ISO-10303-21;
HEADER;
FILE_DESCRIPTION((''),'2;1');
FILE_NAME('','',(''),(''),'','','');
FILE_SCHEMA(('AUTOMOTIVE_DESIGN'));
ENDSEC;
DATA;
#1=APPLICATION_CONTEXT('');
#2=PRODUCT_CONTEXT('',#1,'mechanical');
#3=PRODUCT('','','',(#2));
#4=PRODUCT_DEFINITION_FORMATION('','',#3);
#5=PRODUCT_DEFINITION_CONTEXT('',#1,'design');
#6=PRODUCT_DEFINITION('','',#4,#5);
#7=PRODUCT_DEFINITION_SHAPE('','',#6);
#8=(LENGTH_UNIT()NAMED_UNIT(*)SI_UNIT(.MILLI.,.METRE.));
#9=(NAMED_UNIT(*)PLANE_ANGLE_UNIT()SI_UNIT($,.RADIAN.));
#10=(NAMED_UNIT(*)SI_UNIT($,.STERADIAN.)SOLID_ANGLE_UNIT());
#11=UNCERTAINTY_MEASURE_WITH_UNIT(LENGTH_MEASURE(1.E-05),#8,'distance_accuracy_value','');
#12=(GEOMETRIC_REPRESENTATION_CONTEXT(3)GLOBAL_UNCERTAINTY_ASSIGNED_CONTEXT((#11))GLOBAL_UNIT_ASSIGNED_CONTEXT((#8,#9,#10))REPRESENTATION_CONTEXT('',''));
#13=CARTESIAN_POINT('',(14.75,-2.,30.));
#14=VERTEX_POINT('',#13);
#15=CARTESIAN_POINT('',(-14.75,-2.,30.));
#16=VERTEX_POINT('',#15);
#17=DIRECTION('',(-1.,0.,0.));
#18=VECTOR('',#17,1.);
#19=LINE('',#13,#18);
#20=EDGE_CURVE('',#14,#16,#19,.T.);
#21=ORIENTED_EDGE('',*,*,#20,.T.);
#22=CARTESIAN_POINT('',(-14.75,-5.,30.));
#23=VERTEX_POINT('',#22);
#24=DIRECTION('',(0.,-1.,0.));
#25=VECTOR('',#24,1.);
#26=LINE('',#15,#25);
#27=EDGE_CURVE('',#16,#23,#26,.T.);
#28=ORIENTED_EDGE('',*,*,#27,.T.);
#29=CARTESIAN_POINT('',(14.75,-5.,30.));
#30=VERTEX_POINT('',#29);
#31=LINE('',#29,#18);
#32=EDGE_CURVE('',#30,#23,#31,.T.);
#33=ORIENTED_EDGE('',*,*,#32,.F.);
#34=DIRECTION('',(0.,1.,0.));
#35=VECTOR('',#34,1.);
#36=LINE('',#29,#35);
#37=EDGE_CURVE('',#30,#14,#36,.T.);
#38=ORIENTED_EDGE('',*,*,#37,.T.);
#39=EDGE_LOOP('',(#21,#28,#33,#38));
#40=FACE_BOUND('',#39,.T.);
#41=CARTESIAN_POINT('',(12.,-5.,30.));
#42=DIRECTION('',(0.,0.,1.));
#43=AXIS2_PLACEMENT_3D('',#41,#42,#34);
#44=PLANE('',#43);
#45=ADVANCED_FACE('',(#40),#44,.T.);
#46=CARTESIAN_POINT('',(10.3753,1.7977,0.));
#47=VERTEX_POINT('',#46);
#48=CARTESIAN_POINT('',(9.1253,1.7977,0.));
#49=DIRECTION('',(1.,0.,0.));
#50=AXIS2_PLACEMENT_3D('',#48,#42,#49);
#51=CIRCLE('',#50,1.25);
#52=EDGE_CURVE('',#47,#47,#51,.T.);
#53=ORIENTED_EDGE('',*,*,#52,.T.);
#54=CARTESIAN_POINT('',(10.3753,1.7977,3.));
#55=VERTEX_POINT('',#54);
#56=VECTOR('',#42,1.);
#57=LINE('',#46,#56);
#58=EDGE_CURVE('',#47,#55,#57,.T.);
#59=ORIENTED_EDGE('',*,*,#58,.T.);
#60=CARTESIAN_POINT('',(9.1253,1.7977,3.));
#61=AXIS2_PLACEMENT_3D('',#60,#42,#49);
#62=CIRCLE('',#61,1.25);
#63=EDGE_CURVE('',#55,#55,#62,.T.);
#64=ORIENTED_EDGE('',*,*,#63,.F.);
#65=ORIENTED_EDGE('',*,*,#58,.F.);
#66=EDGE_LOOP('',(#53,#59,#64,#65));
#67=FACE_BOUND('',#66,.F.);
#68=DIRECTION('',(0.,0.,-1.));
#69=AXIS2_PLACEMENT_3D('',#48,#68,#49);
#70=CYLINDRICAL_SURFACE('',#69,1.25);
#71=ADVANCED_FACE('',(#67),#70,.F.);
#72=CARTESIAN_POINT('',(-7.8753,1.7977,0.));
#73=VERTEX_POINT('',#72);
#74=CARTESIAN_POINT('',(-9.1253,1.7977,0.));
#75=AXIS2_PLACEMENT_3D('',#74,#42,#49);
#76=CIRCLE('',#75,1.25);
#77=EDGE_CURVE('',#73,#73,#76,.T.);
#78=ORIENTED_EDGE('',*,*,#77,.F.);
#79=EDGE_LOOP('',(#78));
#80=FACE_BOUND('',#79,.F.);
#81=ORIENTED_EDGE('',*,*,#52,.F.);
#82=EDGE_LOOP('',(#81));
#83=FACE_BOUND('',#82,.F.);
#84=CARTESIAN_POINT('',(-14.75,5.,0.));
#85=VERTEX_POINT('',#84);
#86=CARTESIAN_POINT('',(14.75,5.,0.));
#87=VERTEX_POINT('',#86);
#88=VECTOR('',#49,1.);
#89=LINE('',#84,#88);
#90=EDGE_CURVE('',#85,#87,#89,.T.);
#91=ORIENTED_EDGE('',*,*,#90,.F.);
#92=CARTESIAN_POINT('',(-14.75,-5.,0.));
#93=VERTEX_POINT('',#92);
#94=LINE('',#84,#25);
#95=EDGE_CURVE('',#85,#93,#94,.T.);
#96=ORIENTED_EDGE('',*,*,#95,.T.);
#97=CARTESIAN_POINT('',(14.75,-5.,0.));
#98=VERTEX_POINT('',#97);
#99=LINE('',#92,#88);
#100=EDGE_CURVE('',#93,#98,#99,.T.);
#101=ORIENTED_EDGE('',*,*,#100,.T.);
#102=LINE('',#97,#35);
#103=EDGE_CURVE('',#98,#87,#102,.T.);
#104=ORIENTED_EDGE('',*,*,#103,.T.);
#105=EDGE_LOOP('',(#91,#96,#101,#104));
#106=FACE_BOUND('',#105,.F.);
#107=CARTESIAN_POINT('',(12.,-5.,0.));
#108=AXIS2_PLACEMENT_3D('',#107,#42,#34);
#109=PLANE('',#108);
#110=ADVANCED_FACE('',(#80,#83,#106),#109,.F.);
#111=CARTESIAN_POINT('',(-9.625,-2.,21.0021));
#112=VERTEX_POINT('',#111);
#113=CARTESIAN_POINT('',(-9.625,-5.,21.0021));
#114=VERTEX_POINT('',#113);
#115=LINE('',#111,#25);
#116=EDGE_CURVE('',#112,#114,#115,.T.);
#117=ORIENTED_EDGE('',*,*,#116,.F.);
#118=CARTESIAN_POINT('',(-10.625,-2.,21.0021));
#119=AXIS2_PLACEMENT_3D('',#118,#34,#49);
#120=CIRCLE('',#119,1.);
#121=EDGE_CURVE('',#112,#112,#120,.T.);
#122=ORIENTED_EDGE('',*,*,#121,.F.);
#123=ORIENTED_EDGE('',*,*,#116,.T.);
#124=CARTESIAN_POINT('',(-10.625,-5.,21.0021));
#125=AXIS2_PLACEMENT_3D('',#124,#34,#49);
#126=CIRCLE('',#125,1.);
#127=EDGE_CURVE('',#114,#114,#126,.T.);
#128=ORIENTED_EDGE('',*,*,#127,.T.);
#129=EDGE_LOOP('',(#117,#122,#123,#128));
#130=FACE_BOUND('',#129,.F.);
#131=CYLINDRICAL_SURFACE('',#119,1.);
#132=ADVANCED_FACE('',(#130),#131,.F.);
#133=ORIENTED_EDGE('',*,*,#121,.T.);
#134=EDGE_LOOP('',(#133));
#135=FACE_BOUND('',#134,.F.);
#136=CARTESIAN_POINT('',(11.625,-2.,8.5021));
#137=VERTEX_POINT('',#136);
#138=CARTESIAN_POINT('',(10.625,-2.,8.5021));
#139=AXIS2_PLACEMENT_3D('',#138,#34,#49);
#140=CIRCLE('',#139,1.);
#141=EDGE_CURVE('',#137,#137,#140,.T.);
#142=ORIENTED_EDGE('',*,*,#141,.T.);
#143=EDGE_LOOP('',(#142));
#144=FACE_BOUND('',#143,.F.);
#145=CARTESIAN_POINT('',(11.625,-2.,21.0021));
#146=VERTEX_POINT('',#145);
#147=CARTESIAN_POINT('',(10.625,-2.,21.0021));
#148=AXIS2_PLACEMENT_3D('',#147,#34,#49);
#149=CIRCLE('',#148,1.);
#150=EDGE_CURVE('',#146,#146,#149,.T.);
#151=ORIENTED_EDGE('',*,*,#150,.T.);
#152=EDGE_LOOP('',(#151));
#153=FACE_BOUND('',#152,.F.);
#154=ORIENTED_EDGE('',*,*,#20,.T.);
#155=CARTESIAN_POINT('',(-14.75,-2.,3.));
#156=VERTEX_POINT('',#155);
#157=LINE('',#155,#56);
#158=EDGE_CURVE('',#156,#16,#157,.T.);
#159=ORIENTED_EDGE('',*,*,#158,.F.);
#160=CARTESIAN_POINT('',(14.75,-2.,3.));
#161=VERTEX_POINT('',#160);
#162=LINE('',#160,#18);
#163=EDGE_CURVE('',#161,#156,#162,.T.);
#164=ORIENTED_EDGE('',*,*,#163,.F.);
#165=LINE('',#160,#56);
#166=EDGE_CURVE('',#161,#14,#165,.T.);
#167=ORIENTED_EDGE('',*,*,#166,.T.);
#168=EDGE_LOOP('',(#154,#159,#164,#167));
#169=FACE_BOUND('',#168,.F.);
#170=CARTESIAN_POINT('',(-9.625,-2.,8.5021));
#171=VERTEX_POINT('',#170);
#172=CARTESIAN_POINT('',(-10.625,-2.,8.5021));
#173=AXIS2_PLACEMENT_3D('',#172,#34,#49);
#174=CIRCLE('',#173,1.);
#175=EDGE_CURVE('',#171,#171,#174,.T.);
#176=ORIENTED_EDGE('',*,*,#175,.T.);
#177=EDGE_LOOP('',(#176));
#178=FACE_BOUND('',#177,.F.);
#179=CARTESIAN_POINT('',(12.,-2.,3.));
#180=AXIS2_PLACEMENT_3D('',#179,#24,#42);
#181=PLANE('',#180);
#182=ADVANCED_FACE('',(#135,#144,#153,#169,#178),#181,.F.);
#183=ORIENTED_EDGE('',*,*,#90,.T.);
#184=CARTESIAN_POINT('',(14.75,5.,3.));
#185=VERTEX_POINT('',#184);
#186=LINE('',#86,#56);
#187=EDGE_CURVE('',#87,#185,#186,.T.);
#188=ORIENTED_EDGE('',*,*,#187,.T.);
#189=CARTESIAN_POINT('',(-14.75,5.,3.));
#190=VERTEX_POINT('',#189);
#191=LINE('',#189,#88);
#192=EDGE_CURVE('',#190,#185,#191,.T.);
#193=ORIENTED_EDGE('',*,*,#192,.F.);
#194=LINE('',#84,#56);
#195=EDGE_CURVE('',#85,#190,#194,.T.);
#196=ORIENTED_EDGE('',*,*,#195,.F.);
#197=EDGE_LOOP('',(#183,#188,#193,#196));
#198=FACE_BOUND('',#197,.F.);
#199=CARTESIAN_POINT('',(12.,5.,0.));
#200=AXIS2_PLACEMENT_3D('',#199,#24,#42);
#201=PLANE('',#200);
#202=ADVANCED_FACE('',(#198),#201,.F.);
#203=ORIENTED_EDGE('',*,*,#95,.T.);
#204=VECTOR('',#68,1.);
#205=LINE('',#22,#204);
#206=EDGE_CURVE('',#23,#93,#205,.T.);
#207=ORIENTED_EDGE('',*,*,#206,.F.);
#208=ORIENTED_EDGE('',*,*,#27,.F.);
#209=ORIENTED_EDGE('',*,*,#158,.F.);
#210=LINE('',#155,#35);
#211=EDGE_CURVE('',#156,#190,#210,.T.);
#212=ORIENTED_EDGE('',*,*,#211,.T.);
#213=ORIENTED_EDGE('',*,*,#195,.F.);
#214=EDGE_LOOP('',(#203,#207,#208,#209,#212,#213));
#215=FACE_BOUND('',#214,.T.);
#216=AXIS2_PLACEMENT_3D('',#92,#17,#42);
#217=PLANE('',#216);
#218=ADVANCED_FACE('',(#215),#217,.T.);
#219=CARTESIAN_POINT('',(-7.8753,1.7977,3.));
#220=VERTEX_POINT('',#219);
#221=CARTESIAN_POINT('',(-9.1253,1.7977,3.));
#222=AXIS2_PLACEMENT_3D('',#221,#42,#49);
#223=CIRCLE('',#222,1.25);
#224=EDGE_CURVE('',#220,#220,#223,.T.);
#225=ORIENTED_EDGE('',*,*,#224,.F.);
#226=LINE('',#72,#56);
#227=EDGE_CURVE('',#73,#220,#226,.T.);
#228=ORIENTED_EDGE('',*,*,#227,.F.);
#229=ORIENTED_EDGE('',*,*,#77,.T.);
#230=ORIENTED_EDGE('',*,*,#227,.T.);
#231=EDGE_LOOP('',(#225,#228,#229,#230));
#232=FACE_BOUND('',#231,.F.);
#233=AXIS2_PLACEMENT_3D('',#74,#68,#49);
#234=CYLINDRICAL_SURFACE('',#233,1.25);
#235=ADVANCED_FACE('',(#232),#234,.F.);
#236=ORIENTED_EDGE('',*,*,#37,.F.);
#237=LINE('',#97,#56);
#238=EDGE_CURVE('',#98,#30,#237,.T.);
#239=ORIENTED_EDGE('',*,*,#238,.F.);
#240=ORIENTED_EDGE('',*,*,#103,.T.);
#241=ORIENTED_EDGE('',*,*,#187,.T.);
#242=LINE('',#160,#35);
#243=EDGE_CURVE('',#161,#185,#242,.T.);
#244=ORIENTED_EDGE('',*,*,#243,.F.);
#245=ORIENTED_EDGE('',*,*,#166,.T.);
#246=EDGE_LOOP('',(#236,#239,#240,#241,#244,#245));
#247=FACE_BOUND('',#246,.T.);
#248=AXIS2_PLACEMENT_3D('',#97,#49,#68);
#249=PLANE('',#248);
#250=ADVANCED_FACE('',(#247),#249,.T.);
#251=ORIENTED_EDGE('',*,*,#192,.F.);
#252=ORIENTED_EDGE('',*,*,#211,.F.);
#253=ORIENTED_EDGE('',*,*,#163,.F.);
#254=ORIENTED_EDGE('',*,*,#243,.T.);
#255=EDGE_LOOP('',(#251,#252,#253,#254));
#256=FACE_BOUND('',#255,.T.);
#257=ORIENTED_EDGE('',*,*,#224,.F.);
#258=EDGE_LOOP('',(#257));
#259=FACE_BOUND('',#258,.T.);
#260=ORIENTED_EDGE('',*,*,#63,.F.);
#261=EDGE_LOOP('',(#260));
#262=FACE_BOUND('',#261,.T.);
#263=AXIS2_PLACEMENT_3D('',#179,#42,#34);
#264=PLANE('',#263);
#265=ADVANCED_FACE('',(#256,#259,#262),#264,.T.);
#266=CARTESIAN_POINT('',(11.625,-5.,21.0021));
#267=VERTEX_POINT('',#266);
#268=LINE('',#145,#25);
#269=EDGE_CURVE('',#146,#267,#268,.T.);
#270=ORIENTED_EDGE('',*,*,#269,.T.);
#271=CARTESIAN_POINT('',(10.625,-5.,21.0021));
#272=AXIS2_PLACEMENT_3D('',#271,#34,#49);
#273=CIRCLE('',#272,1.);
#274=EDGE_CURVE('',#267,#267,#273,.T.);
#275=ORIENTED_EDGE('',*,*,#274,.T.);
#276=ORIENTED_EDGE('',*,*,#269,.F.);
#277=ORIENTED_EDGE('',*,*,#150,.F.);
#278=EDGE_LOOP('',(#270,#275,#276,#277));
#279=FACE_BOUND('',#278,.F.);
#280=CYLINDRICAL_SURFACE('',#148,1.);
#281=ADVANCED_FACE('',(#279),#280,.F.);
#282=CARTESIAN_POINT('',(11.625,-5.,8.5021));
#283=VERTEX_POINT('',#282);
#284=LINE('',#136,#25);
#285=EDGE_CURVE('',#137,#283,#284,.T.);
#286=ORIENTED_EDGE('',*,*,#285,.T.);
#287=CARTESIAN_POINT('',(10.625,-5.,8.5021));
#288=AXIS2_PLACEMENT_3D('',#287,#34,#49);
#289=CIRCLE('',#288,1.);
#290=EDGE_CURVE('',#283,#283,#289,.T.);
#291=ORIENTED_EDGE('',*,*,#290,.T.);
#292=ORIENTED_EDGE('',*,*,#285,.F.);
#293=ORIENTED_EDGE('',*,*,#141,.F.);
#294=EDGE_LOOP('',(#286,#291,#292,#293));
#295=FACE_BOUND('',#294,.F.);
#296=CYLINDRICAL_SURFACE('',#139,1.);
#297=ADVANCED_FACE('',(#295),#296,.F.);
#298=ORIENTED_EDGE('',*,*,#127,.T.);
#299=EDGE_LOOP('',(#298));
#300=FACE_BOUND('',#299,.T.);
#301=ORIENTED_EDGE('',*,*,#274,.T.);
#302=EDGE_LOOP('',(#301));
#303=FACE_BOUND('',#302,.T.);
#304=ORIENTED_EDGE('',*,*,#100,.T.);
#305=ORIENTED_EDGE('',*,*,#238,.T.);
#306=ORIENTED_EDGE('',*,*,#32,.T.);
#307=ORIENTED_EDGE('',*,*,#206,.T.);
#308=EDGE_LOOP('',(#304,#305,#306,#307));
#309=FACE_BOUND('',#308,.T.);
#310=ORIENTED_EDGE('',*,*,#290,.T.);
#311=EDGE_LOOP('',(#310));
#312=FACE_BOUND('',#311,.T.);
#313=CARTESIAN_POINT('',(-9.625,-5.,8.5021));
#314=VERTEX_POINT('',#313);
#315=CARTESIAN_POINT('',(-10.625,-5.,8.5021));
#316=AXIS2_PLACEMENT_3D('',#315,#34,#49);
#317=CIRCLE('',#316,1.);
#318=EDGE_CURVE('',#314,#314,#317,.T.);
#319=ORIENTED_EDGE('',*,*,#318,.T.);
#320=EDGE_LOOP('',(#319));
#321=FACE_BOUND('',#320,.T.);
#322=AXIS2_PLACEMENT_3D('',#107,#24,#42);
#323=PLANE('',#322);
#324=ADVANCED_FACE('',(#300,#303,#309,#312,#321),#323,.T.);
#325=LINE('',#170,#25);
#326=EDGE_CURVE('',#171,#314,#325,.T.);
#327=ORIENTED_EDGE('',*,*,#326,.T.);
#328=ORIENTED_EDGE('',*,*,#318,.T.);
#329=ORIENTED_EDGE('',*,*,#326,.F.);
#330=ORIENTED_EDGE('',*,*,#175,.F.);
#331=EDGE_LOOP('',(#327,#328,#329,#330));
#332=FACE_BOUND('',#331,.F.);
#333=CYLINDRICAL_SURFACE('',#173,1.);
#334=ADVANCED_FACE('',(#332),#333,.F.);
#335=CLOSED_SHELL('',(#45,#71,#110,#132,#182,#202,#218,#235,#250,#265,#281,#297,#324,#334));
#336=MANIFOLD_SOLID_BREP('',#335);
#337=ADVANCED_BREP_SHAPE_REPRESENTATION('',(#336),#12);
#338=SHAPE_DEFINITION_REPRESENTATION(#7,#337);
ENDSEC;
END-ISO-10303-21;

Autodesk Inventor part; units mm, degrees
ref_plane "YZ Plane" through (0, 0, 0) normal (1, 0, 0) x (0, 1, 0)
ref_plane "XZ Plane" through (0, 0, 0) normal (0, 1, 0) x (-1, 0, 0)
ref_plane "XY Plane" through (0, 0, 0) normal (0, 0, 1) x (1, 0, 0)
sketch "Sketch1" plane through (0, 0, 0) normal (0, 0, 1) x (1, 0, 0)
  line L0 (-12, -5) -> (12, -5)
  line L1 (12, -5) -> (12, 5)
  line L2 (12, 5) -> (-12, 5)
  line L3 (-12, 5) -> (-12, -5)
  line L4 (-12, -5) -> (12, 5) construction
  line L5 (12, -5) -> (-12, 5) construction
  line L6 (-12, 5) -> (-10, 5)
  line L7 (-12, 3) -> (-12, 5)
  line L8 (12, 5) -> (10, 5)
  line L9 (12, 3) -> (12, 5)
  circle A0 centre (-9.1253, 1.7977) radius 1.25
  circle A1 centre (9.1253, 1.7977) radius 1.25
  point P0 (0, 0)
  point P1 (-12, 0)
  point P2 (12, 0)
  point P3 (10.3753, 1.7977)
  point P4 (10.375, 1.7725)
  point P5 (9.4672, 3)
  point P6 (-9.4672, 3)
  point P7 (10.375, 1.7725)
  point P8 (-10.375, 1.7725)
  dimension "d0" = 24
  dimension "d1" = 10
  dimension "d14" = 2.5
  dimension "d15" = 2.5
  dimension "d55" = 8
  dimension "d58" = 8
  dimension "d60" = 1.625
  dimension "d61" = 1.625
  dimension "d62" = 18.2505
extrude "Extrusion4" add sketch "Sketch1" along normal blind 3
sketch "Sketch3" plane through (0, 0, 3) normal (0, 0, 1) x (1, 0, 0)
  line L0 (12, -5) -> (12, 5) projected
  line L1 (12, -5) -> (-12, -5)
  line L2 (-12, -5) -> (-12, -2)
  line L3 (-12, -2) -> (12, -2)
  line L4 (12, -2) -> (12, -5)
  point P0 (0, 0)
  point P1 (-12, -5)
  point P2 (12, 3)
  dimension "d24" = 3
extrude "Extrusion5" add sketch "Sketch3" along normal blind 27
sketch "Sketch4" plane through (-12, -2, 3) normal (0, 1, 0) x (1, 0, 0)
  circle A0 centre (22.625, -18.0021) radius 1
  circle A1 centre (1.375, -18.0021) radius 1
  circle A2 centre (22.625, -5.5021) radius 1
  circle A3 centre (1.375, -5.5021) radius 1
  line L0 (24, -0.0021) -> (0, -0.0021)
  line L1 (24, 0) -> (24, -27) projected
  line L2 (0, 3) -> (0, -27) projected
  point P0 (12, 3)
  dimension "d68" = 1.375
  dimension "d69" = 1.375
  dimension "d70" = 1.375
  dimension "d71" = 1.375
extrude "Extrusion7" cut sketch "Sketch4" against normal blind 3
sketch "Sketch5" plane through (0, 0, 0) normal (0, 0, -1) x (-1, 0, 0)
  circle A0 centre (-9.1253, 1.7977) radius 1.25 projected
  circle A1 centre (9.1253, 1.7977) radius 1.25 projected
  point P0 (0, 0)
sketch "Sketch6" plane through (-12, -5, 0) normal (-1, 0, 0) x (0, 0, 1)
  line L0 (0, 10) -> (0, 0) projected
  line L1 (0, 10) -> (3, 10) projected
  line L2 (0, 10) -> (3, 10)
  line L3 (3, 3) -> (3, 10) projected
  line L4 (3, 10) -> (3, 3)
  line L5 (30, 3) -> (30, 0) projected
  line L6 (3, 3) -> (30, 3)
  line L7 (30, 3) -> (30, 0)
  line L8 (30, 0) -> (0, 0)
  line L9 (0, 0) -> (0, 10)
  point P0 (0, 5)
extrude "Extrusion8" add sketch "Sketch6" along normal blind 2.75
sketch "Sketch7" plane through (12, -5, 0) normal (1, 0, 0) x (0, 0, -1)
  line L0 (0, 0) -> (0, 10) projected
  line L1 (0, 10) -> (-3, 10) projected
  line L2 (0, 10) -> (-3, 10)
  line L3 (-3, 3) -> (-3, 10) projected
  line L4 (-3, 10) -> (-3, 3)
  line L5 (-30, 0) -> (-30, 3) projected
  line L6 (-3, 3) -> (-30, 3)
  line L7 (-30, 3) -> (-30, 0)
  line L8 (0, 0) -> (-30, 0) projected
  line L9 (-30, 0) -> (0, 0)
  line L10 (0, 0) -> (0, 10)
  point P0 (0, 5)
extrude "Extrusion9" add sketch "Sketch7" along normal blind 2.75
properties part number "Kamera Holder"
